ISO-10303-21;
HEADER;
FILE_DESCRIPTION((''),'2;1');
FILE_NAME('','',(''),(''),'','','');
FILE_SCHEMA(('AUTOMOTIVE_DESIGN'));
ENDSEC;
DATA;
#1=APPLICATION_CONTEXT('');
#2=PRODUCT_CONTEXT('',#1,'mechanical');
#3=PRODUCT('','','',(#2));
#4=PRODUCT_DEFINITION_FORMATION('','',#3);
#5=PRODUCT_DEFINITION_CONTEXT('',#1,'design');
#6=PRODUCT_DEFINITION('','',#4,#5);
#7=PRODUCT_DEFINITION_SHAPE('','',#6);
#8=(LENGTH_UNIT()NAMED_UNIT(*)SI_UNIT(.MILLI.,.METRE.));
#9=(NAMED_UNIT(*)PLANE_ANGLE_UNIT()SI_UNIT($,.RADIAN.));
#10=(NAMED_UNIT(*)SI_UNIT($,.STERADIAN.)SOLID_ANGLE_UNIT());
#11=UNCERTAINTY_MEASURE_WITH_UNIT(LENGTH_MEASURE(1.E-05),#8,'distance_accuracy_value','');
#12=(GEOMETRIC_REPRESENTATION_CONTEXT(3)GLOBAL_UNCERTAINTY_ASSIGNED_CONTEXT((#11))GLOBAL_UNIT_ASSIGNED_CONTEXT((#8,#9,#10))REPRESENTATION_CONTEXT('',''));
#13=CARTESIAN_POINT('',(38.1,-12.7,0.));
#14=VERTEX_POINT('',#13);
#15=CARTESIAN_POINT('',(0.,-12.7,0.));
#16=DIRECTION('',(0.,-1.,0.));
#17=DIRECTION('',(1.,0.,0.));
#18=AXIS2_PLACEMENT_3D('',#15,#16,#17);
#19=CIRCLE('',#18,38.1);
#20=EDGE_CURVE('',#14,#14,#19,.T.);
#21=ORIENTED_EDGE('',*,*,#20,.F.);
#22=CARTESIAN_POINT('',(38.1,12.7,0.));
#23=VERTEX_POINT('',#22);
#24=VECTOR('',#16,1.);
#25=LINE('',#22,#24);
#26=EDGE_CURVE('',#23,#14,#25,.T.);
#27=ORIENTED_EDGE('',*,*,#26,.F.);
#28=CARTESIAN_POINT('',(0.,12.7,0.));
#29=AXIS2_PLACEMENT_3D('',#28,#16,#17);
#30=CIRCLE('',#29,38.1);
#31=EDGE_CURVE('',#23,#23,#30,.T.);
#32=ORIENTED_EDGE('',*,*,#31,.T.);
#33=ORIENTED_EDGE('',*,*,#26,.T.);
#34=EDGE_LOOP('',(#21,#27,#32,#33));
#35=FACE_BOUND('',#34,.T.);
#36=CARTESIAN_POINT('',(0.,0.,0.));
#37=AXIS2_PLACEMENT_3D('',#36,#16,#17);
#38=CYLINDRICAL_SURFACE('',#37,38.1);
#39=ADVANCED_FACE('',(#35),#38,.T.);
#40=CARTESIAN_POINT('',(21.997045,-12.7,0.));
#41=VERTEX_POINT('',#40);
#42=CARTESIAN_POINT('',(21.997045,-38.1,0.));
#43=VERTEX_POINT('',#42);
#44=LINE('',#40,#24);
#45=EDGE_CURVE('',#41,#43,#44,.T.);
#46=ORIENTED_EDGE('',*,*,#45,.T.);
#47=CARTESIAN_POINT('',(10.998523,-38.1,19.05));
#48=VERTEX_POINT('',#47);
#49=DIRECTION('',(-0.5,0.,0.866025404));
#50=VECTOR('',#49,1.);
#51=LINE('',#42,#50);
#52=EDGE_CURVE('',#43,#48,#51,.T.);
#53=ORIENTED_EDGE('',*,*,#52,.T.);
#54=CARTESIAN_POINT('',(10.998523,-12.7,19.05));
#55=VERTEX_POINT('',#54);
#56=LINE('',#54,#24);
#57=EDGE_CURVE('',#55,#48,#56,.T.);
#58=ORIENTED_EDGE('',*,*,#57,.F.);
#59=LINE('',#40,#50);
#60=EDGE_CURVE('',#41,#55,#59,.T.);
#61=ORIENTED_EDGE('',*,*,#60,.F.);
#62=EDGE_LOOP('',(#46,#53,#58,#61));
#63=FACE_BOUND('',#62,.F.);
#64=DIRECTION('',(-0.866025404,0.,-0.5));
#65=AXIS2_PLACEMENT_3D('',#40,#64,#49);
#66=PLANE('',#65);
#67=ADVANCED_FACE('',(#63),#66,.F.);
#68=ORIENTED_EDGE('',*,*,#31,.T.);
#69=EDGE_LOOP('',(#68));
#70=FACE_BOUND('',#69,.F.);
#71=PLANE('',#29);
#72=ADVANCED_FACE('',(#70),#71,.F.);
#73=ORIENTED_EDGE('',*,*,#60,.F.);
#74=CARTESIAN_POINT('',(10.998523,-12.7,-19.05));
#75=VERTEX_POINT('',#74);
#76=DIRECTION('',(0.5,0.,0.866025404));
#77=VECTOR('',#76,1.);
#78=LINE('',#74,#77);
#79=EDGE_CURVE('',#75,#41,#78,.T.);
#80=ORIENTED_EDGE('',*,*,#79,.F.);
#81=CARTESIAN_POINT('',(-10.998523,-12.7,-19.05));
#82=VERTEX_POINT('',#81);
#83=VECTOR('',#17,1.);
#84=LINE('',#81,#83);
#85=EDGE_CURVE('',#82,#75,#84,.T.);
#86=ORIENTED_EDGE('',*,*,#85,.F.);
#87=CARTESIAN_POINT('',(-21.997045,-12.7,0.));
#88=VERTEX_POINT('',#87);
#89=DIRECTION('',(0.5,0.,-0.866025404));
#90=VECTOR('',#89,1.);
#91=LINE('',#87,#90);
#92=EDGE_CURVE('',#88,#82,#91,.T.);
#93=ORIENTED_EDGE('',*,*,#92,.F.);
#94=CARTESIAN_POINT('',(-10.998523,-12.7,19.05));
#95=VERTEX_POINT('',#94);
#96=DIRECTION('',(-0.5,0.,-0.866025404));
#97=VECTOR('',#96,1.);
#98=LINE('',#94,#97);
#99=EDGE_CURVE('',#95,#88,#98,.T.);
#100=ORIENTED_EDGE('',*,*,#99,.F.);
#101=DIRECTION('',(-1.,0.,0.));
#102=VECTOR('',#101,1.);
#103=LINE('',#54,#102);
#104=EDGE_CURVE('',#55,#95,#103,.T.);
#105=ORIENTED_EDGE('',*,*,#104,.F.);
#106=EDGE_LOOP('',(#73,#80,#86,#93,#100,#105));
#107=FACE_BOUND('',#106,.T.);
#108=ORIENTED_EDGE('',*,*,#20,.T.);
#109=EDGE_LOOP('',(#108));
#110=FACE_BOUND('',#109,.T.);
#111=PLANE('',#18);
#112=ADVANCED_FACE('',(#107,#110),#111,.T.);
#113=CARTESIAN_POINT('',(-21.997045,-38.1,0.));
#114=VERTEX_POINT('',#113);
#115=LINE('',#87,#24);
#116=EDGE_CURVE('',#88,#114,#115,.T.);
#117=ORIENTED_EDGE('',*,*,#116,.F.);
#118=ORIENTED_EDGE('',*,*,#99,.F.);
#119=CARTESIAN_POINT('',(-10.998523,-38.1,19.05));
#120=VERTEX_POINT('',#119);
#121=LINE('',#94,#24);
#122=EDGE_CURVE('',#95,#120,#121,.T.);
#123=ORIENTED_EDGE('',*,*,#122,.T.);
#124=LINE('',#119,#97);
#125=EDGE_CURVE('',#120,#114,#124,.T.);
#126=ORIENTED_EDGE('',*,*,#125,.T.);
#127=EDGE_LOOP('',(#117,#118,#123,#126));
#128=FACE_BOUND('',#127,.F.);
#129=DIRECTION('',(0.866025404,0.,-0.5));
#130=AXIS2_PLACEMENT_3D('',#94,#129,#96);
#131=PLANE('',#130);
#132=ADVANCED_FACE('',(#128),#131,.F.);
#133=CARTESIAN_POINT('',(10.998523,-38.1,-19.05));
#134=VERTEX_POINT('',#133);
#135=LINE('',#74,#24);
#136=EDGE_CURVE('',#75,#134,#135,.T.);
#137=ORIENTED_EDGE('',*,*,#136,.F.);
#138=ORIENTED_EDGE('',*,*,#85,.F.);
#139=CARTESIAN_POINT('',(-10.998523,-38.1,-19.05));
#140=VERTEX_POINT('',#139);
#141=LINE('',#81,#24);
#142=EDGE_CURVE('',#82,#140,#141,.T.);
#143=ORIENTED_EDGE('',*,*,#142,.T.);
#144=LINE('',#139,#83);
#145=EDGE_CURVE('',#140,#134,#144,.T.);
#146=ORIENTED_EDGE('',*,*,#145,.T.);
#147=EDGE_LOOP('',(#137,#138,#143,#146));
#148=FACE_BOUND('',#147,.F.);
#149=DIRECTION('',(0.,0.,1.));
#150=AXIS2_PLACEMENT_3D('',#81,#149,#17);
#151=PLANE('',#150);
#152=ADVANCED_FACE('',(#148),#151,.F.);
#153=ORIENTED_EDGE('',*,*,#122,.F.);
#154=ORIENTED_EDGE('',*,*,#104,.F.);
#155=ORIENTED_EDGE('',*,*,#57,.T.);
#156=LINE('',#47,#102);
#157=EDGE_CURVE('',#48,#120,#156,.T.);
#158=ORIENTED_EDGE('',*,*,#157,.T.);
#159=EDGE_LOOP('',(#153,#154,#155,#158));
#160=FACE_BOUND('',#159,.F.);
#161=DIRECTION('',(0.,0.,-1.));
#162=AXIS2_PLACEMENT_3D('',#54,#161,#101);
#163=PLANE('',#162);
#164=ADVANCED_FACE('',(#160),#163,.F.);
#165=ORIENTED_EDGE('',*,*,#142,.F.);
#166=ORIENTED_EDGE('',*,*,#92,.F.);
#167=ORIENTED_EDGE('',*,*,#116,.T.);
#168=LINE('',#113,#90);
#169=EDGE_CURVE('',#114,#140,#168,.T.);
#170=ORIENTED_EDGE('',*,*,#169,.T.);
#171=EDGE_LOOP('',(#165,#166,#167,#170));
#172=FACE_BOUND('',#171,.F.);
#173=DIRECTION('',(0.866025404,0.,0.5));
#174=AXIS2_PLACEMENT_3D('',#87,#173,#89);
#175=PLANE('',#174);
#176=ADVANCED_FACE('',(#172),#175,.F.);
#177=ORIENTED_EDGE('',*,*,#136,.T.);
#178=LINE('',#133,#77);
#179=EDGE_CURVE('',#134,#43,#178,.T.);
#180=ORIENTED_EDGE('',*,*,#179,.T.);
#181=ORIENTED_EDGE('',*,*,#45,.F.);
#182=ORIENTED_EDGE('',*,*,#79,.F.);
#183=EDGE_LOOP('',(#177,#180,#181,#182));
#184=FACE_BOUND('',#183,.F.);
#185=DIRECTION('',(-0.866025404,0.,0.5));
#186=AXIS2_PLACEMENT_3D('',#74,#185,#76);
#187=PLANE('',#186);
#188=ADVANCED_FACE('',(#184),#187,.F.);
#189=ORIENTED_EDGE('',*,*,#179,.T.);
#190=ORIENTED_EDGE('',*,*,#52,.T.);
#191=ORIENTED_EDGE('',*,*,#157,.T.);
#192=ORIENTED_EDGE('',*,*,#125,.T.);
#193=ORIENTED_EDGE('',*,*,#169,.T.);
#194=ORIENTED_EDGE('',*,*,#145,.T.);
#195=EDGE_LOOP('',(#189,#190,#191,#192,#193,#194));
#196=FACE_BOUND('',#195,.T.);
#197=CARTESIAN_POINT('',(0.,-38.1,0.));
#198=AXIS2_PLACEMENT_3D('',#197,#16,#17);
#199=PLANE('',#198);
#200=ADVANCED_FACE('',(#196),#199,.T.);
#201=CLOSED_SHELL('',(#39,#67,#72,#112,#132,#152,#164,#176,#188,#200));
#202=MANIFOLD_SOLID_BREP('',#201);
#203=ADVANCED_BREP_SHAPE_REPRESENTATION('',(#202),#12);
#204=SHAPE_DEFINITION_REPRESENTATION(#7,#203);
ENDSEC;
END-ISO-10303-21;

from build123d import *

# Parameters (mm, degrees)
F0_R     = 38.1
F1_DEPTH = 12.7
F3_DEPTH = 25.4


with BuildPart() as f1:
    # F0 (on Front) → F1 (new body, symmetric)
    with BuildSketch(Plane.XZ):
        Circle(F0_R)
    extrude(amount=F1_DEPTH, both=True)

    # F2 (on face) → F3 (join)
    with BuildSketch(Plane.XZ.offset(12.7)):
        Polygon((10.9985226281, 19.05), (-10.9985226281, 19.05), (-21.9970452561, 0), (-10.9985226281, -19.05), (10.9985226281, -19.05), (21.9970452561, 0), align=None)
    extrude(amount=F3_DEPTH)


solid = f1.part
